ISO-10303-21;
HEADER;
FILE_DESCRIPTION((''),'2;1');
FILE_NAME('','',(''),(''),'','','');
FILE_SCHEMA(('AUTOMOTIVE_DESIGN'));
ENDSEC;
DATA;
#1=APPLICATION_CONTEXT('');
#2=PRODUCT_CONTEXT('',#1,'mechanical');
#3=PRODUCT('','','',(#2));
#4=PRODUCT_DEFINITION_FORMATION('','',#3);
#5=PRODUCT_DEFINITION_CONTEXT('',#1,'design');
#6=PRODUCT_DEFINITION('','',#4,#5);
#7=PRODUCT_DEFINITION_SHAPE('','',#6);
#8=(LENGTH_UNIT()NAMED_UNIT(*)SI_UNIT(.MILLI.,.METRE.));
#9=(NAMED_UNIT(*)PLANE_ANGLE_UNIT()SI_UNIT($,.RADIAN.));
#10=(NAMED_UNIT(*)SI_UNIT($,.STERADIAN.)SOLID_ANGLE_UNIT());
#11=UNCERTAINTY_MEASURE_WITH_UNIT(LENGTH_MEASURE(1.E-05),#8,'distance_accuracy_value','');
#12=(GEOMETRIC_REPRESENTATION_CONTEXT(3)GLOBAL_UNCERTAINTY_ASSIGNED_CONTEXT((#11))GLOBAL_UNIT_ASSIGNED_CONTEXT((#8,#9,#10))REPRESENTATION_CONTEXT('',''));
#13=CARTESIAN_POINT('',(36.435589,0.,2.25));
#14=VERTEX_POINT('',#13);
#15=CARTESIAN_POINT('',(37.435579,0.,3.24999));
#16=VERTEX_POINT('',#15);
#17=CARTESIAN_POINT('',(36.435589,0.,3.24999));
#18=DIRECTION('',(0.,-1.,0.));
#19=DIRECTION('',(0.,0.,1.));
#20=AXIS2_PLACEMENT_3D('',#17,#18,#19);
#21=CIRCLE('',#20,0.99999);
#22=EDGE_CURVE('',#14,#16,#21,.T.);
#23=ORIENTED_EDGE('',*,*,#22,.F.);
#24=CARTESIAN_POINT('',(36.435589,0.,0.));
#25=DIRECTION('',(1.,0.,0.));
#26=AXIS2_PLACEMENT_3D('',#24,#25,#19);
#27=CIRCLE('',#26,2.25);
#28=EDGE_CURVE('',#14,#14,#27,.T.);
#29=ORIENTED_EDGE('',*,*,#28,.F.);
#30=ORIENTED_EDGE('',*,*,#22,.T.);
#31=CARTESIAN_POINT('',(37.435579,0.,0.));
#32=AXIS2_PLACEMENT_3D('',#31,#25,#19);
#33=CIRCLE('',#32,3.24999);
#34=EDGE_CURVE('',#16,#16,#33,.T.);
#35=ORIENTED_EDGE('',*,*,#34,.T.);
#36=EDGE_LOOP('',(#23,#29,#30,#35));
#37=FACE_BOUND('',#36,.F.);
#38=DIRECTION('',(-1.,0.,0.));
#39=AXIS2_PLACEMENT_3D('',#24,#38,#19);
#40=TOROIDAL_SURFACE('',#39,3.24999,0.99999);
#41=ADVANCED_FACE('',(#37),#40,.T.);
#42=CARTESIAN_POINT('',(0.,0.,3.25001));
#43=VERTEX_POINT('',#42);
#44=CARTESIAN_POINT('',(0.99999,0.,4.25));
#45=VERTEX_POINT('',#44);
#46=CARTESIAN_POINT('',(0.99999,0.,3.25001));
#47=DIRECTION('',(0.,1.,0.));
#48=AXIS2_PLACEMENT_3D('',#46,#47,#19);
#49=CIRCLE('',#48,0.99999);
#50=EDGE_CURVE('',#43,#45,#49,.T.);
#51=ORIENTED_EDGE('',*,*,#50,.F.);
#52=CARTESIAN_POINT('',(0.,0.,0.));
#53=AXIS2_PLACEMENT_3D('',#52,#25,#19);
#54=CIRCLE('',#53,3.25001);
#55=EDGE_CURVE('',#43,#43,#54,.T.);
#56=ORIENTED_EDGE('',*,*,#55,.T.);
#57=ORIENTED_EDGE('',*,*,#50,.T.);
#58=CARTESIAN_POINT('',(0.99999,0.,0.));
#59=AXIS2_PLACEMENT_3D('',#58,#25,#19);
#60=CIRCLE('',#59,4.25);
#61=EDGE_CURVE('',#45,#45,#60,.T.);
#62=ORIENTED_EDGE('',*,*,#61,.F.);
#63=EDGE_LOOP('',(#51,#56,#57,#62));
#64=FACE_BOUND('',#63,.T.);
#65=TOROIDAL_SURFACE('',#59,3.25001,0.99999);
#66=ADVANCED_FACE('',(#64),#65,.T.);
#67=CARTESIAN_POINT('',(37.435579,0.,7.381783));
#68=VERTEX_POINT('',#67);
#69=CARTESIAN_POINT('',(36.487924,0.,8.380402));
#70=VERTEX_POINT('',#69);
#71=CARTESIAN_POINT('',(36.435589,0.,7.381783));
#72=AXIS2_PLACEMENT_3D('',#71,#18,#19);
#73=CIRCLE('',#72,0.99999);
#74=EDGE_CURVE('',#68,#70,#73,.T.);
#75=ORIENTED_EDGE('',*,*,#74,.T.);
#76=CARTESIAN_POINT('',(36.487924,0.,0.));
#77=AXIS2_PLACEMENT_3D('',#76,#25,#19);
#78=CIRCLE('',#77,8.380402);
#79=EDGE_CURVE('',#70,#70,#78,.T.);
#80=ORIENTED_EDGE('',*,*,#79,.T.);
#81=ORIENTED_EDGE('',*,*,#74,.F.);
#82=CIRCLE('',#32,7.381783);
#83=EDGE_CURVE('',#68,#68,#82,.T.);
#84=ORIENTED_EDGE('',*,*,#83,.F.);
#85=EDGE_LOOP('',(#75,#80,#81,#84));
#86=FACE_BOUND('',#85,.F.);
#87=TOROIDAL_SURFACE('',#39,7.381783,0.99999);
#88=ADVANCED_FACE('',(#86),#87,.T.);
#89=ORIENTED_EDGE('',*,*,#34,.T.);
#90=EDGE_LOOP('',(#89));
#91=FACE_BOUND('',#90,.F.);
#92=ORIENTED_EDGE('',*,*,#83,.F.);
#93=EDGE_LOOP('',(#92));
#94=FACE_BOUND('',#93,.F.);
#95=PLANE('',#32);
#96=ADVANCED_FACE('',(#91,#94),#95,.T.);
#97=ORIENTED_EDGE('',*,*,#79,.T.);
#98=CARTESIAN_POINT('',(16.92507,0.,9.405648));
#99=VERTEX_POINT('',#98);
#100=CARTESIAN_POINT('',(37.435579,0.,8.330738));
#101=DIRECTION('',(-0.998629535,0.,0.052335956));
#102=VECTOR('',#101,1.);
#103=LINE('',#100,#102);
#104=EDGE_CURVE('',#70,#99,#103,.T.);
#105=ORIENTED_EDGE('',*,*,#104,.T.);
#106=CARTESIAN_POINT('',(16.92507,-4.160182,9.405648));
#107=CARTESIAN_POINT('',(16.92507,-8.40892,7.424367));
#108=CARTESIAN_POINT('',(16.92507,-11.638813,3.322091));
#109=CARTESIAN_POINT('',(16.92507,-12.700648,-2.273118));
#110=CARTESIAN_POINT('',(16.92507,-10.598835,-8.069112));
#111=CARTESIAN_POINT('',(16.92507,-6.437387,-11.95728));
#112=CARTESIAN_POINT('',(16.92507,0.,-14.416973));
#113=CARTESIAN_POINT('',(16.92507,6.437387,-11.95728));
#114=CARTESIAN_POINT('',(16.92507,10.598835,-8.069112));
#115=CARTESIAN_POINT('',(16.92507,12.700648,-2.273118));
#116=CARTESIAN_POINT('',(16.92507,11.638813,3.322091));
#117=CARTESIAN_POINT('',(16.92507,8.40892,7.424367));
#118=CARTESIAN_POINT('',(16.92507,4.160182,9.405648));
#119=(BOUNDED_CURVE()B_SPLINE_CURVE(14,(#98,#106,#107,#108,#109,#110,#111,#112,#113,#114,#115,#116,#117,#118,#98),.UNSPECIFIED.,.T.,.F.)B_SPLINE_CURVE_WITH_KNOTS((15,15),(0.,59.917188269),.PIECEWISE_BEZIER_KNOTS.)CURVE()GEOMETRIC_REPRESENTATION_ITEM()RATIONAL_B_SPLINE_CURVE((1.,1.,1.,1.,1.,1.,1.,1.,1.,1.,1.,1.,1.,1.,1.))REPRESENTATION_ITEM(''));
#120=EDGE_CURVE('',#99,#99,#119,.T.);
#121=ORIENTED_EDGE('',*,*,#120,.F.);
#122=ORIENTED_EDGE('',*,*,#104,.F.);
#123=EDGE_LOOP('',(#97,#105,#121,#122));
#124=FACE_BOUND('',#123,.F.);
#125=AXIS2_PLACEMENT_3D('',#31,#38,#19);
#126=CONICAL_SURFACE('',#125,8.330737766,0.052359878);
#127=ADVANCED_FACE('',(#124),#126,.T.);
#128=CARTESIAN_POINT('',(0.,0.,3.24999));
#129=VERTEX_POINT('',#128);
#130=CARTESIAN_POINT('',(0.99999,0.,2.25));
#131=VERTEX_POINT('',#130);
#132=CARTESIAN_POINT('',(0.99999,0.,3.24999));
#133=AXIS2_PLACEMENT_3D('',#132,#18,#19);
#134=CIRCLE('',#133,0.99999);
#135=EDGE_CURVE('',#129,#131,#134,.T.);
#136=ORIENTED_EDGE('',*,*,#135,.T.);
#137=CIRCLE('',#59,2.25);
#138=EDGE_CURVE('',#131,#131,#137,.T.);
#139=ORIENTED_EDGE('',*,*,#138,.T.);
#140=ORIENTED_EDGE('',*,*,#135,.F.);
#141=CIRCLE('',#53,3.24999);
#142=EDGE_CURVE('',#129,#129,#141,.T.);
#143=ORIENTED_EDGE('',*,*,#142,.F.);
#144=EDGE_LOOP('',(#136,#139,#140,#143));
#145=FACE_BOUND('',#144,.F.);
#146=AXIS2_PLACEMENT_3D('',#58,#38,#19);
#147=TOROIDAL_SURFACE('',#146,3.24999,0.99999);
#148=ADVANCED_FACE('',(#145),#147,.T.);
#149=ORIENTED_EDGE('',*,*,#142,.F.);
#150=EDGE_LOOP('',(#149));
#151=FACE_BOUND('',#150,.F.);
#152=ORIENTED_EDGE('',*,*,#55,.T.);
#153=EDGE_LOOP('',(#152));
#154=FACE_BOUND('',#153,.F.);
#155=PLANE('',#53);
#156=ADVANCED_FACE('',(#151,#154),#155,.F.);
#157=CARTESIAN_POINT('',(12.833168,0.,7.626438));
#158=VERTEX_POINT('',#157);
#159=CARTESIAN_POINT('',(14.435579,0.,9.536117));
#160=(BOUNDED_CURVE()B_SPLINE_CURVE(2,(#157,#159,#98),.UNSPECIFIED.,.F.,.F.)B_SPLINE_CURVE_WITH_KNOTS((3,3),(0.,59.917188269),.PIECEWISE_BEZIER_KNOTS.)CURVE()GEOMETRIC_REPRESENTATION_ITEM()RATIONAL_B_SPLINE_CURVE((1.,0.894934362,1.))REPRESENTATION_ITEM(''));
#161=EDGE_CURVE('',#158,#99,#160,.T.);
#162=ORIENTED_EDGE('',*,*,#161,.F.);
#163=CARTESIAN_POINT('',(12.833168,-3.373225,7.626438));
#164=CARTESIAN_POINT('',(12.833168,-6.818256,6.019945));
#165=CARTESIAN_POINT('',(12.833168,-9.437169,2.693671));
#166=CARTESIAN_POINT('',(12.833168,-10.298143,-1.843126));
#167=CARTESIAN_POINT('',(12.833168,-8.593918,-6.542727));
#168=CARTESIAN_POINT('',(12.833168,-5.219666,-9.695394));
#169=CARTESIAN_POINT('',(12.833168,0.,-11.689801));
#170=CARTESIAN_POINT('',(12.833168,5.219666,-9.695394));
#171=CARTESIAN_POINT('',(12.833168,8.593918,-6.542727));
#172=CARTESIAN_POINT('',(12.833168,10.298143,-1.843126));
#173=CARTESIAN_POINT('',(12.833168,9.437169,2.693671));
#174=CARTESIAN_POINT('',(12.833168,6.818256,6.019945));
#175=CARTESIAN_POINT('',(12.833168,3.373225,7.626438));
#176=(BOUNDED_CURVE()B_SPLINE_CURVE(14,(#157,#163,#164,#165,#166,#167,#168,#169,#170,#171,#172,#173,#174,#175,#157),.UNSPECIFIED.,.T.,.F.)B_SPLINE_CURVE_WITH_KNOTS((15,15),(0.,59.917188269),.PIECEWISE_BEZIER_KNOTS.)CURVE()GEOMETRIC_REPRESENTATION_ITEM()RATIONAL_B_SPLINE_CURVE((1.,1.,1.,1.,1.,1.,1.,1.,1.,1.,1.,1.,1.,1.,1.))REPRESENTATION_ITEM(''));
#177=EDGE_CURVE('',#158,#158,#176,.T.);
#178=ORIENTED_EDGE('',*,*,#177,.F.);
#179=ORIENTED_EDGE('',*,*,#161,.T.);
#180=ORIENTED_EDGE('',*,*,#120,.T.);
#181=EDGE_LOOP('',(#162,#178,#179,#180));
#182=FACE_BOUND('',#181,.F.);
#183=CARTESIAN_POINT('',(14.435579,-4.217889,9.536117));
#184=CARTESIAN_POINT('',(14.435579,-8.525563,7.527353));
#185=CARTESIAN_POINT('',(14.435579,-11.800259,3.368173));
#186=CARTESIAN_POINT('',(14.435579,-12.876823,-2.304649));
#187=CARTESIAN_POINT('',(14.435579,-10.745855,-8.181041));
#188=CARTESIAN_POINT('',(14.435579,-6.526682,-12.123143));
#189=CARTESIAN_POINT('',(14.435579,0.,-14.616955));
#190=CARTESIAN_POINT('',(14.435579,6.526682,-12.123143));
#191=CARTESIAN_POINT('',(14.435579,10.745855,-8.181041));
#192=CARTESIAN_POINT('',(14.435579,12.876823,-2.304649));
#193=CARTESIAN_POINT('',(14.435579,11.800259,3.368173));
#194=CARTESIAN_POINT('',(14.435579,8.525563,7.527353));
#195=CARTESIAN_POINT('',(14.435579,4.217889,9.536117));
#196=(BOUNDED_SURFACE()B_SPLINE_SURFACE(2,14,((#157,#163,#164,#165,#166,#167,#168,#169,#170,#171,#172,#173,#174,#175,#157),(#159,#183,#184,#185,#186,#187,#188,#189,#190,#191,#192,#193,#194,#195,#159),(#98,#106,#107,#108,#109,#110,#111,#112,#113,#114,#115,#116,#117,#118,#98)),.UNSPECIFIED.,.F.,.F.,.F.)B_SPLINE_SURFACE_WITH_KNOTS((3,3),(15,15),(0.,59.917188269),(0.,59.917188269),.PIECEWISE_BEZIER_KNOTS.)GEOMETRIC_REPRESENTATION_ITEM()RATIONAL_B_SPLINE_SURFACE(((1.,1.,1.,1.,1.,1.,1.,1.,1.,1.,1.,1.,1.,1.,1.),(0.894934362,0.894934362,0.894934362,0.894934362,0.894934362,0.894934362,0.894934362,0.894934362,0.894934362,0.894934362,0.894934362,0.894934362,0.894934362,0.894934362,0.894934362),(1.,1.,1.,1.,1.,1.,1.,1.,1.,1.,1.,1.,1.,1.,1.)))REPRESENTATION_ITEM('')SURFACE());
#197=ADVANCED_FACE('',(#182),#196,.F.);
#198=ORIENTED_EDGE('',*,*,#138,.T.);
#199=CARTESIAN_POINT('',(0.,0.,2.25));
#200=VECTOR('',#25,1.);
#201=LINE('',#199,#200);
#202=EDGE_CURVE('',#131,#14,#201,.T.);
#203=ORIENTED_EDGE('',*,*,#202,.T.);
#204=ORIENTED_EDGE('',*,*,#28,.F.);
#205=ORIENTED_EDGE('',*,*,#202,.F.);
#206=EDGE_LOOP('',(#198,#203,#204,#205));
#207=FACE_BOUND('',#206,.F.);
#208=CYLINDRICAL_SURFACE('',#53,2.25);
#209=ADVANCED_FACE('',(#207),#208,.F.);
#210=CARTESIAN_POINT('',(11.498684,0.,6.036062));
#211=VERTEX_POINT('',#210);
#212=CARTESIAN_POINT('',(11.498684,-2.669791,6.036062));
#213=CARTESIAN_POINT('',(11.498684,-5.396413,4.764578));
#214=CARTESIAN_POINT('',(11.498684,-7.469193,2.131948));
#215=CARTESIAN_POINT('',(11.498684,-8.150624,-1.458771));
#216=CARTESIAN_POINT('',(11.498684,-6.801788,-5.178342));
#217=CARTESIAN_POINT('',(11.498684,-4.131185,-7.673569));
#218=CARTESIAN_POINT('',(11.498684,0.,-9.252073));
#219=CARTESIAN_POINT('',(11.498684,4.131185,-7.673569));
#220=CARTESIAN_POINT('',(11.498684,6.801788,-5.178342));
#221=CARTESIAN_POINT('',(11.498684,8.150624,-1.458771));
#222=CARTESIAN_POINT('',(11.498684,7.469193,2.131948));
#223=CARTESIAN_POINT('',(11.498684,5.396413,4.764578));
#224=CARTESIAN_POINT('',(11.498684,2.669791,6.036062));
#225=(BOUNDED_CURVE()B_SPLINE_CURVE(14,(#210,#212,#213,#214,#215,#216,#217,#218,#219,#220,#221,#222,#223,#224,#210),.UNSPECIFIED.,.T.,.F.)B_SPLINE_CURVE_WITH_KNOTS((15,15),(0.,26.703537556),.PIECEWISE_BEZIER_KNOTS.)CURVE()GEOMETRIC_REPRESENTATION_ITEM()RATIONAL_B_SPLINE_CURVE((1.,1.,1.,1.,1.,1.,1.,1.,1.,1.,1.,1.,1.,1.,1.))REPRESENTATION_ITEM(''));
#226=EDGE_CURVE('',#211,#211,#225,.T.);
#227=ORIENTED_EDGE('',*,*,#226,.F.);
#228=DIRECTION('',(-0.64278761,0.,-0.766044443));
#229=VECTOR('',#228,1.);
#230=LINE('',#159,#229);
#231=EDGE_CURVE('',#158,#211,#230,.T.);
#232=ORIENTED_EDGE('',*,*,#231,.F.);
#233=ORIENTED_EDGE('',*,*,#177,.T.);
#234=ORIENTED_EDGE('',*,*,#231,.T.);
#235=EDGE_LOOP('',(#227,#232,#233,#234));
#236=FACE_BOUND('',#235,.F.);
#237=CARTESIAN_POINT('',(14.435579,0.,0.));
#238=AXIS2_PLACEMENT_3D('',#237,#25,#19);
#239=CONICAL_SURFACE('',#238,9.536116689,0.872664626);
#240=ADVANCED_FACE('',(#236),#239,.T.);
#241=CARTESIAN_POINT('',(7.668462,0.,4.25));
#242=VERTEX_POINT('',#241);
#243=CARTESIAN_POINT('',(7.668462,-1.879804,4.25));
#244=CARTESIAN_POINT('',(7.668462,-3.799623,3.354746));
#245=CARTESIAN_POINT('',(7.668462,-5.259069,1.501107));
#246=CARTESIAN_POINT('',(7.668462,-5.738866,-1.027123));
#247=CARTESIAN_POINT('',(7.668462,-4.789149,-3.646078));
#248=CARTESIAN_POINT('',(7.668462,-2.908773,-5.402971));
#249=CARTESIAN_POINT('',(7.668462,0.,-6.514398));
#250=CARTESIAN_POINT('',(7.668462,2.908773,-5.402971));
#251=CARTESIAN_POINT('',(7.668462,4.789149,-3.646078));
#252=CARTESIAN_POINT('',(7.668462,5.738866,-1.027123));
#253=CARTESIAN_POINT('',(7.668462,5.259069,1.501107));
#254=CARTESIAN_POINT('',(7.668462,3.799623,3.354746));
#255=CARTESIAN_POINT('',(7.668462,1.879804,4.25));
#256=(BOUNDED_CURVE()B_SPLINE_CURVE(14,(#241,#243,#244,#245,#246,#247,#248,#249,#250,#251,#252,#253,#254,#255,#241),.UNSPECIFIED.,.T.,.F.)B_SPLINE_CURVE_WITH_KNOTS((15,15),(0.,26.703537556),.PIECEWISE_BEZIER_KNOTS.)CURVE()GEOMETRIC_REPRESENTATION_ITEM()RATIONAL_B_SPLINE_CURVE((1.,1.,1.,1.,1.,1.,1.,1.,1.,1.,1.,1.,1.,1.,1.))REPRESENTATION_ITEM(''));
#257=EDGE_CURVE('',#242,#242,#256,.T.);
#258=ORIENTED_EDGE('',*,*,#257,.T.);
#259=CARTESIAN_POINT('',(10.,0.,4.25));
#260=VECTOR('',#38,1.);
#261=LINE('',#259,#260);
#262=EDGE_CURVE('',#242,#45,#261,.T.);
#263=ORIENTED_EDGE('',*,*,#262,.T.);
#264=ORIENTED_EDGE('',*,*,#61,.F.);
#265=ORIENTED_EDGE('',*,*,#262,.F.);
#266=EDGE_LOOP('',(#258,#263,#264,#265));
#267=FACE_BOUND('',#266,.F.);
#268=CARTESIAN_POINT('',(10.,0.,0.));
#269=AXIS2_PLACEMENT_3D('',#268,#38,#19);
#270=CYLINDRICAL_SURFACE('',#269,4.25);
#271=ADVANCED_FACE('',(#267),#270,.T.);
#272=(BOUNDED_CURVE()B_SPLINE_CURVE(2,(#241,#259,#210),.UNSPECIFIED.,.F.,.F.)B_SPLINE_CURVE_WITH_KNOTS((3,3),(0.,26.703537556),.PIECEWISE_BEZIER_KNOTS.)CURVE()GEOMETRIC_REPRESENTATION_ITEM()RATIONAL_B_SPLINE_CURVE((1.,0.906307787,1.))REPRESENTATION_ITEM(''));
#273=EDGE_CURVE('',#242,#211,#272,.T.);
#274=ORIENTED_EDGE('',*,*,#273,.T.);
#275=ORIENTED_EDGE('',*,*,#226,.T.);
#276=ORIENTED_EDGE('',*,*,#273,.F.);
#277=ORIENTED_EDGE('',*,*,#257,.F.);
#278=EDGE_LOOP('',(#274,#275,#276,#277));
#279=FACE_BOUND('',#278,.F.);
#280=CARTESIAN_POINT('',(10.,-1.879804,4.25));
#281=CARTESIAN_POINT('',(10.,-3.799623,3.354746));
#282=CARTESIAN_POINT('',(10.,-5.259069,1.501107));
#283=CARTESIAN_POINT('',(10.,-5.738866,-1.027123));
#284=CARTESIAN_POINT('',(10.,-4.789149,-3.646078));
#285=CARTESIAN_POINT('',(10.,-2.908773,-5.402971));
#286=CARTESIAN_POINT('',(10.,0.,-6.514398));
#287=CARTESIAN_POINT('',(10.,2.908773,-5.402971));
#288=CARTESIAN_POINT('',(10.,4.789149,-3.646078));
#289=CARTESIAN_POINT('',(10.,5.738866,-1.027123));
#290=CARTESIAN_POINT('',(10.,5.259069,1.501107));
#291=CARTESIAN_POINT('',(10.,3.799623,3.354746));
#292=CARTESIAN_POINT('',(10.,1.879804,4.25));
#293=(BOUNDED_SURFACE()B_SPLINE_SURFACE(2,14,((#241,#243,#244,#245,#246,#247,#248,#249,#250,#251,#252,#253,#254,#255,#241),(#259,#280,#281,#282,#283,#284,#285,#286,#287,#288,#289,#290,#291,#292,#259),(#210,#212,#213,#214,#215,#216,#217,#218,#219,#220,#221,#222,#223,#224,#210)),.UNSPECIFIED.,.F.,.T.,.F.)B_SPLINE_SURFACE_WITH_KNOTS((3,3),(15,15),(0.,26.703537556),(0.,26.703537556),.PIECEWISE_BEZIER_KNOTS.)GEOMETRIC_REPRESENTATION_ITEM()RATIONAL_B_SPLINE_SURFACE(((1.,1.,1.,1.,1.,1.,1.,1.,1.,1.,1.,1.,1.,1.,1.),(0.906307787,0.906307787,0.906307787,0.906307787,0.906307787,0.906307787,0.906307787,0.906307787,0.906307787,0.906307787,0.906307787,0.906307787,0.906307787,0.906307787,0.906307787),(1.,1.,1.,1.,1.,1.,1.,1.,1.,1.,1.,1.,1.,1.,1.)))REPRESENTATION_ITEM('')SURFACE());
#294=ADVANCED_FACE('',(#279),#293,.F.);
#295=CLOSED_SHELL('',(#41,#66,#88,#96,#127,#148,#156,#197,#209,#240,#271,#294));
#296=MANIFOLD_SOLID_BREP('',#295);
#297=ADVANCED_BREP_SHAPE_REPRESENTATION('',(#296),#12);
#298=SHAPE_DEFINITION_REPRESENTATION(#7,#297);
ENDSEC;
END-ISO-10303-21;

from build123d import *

# Parameters (mm, degrees)
F2_R = 0.99999
F3_R = 5


# Not quite as in the source:
# - a fillet or chamfer is up to 0.001 mm smaller than in the source, because OpenCascade refuses the exact size


with BuildPart() as f1:
    # F0 (on Front) → F1 (revolve)
    with BuildSketch(Plane.XZ):
        Polygon((0, 4.25), (0, 2.25), (14.4355785643, 2.25), (37.4355785643, 2.25), (37.4355785643, 8.3307377657), (14.4355785643, 9.5361166892), (10, 4.25), align=None)
    revolve(axis=Axis((-40, 0, 0), (1, 0, 0)))

    # F2 (radius 1 in the source; OpenCascade refuses exactly that, so slightly less here)
    f2_edges = [f1.edges().sort_by_distance(p)[0] for p in [
        (0, 0, -4.25),
        (37.435579, 0, -8.330738),
        (37.435579, 0, -2.25),
        (0, 0, -2.25),
    ]]
    fillet(f2_edges, radius=F2_R)

    # F3
    f3_edges = [f1.edges().sort_by_distance(p)[0] for p in [
        (14.435579, 0, -9.536117),
        (10, 0, -4.25),
    ]]
    fillet(f3_edges, radius=F3_R)


solid = f1.part
